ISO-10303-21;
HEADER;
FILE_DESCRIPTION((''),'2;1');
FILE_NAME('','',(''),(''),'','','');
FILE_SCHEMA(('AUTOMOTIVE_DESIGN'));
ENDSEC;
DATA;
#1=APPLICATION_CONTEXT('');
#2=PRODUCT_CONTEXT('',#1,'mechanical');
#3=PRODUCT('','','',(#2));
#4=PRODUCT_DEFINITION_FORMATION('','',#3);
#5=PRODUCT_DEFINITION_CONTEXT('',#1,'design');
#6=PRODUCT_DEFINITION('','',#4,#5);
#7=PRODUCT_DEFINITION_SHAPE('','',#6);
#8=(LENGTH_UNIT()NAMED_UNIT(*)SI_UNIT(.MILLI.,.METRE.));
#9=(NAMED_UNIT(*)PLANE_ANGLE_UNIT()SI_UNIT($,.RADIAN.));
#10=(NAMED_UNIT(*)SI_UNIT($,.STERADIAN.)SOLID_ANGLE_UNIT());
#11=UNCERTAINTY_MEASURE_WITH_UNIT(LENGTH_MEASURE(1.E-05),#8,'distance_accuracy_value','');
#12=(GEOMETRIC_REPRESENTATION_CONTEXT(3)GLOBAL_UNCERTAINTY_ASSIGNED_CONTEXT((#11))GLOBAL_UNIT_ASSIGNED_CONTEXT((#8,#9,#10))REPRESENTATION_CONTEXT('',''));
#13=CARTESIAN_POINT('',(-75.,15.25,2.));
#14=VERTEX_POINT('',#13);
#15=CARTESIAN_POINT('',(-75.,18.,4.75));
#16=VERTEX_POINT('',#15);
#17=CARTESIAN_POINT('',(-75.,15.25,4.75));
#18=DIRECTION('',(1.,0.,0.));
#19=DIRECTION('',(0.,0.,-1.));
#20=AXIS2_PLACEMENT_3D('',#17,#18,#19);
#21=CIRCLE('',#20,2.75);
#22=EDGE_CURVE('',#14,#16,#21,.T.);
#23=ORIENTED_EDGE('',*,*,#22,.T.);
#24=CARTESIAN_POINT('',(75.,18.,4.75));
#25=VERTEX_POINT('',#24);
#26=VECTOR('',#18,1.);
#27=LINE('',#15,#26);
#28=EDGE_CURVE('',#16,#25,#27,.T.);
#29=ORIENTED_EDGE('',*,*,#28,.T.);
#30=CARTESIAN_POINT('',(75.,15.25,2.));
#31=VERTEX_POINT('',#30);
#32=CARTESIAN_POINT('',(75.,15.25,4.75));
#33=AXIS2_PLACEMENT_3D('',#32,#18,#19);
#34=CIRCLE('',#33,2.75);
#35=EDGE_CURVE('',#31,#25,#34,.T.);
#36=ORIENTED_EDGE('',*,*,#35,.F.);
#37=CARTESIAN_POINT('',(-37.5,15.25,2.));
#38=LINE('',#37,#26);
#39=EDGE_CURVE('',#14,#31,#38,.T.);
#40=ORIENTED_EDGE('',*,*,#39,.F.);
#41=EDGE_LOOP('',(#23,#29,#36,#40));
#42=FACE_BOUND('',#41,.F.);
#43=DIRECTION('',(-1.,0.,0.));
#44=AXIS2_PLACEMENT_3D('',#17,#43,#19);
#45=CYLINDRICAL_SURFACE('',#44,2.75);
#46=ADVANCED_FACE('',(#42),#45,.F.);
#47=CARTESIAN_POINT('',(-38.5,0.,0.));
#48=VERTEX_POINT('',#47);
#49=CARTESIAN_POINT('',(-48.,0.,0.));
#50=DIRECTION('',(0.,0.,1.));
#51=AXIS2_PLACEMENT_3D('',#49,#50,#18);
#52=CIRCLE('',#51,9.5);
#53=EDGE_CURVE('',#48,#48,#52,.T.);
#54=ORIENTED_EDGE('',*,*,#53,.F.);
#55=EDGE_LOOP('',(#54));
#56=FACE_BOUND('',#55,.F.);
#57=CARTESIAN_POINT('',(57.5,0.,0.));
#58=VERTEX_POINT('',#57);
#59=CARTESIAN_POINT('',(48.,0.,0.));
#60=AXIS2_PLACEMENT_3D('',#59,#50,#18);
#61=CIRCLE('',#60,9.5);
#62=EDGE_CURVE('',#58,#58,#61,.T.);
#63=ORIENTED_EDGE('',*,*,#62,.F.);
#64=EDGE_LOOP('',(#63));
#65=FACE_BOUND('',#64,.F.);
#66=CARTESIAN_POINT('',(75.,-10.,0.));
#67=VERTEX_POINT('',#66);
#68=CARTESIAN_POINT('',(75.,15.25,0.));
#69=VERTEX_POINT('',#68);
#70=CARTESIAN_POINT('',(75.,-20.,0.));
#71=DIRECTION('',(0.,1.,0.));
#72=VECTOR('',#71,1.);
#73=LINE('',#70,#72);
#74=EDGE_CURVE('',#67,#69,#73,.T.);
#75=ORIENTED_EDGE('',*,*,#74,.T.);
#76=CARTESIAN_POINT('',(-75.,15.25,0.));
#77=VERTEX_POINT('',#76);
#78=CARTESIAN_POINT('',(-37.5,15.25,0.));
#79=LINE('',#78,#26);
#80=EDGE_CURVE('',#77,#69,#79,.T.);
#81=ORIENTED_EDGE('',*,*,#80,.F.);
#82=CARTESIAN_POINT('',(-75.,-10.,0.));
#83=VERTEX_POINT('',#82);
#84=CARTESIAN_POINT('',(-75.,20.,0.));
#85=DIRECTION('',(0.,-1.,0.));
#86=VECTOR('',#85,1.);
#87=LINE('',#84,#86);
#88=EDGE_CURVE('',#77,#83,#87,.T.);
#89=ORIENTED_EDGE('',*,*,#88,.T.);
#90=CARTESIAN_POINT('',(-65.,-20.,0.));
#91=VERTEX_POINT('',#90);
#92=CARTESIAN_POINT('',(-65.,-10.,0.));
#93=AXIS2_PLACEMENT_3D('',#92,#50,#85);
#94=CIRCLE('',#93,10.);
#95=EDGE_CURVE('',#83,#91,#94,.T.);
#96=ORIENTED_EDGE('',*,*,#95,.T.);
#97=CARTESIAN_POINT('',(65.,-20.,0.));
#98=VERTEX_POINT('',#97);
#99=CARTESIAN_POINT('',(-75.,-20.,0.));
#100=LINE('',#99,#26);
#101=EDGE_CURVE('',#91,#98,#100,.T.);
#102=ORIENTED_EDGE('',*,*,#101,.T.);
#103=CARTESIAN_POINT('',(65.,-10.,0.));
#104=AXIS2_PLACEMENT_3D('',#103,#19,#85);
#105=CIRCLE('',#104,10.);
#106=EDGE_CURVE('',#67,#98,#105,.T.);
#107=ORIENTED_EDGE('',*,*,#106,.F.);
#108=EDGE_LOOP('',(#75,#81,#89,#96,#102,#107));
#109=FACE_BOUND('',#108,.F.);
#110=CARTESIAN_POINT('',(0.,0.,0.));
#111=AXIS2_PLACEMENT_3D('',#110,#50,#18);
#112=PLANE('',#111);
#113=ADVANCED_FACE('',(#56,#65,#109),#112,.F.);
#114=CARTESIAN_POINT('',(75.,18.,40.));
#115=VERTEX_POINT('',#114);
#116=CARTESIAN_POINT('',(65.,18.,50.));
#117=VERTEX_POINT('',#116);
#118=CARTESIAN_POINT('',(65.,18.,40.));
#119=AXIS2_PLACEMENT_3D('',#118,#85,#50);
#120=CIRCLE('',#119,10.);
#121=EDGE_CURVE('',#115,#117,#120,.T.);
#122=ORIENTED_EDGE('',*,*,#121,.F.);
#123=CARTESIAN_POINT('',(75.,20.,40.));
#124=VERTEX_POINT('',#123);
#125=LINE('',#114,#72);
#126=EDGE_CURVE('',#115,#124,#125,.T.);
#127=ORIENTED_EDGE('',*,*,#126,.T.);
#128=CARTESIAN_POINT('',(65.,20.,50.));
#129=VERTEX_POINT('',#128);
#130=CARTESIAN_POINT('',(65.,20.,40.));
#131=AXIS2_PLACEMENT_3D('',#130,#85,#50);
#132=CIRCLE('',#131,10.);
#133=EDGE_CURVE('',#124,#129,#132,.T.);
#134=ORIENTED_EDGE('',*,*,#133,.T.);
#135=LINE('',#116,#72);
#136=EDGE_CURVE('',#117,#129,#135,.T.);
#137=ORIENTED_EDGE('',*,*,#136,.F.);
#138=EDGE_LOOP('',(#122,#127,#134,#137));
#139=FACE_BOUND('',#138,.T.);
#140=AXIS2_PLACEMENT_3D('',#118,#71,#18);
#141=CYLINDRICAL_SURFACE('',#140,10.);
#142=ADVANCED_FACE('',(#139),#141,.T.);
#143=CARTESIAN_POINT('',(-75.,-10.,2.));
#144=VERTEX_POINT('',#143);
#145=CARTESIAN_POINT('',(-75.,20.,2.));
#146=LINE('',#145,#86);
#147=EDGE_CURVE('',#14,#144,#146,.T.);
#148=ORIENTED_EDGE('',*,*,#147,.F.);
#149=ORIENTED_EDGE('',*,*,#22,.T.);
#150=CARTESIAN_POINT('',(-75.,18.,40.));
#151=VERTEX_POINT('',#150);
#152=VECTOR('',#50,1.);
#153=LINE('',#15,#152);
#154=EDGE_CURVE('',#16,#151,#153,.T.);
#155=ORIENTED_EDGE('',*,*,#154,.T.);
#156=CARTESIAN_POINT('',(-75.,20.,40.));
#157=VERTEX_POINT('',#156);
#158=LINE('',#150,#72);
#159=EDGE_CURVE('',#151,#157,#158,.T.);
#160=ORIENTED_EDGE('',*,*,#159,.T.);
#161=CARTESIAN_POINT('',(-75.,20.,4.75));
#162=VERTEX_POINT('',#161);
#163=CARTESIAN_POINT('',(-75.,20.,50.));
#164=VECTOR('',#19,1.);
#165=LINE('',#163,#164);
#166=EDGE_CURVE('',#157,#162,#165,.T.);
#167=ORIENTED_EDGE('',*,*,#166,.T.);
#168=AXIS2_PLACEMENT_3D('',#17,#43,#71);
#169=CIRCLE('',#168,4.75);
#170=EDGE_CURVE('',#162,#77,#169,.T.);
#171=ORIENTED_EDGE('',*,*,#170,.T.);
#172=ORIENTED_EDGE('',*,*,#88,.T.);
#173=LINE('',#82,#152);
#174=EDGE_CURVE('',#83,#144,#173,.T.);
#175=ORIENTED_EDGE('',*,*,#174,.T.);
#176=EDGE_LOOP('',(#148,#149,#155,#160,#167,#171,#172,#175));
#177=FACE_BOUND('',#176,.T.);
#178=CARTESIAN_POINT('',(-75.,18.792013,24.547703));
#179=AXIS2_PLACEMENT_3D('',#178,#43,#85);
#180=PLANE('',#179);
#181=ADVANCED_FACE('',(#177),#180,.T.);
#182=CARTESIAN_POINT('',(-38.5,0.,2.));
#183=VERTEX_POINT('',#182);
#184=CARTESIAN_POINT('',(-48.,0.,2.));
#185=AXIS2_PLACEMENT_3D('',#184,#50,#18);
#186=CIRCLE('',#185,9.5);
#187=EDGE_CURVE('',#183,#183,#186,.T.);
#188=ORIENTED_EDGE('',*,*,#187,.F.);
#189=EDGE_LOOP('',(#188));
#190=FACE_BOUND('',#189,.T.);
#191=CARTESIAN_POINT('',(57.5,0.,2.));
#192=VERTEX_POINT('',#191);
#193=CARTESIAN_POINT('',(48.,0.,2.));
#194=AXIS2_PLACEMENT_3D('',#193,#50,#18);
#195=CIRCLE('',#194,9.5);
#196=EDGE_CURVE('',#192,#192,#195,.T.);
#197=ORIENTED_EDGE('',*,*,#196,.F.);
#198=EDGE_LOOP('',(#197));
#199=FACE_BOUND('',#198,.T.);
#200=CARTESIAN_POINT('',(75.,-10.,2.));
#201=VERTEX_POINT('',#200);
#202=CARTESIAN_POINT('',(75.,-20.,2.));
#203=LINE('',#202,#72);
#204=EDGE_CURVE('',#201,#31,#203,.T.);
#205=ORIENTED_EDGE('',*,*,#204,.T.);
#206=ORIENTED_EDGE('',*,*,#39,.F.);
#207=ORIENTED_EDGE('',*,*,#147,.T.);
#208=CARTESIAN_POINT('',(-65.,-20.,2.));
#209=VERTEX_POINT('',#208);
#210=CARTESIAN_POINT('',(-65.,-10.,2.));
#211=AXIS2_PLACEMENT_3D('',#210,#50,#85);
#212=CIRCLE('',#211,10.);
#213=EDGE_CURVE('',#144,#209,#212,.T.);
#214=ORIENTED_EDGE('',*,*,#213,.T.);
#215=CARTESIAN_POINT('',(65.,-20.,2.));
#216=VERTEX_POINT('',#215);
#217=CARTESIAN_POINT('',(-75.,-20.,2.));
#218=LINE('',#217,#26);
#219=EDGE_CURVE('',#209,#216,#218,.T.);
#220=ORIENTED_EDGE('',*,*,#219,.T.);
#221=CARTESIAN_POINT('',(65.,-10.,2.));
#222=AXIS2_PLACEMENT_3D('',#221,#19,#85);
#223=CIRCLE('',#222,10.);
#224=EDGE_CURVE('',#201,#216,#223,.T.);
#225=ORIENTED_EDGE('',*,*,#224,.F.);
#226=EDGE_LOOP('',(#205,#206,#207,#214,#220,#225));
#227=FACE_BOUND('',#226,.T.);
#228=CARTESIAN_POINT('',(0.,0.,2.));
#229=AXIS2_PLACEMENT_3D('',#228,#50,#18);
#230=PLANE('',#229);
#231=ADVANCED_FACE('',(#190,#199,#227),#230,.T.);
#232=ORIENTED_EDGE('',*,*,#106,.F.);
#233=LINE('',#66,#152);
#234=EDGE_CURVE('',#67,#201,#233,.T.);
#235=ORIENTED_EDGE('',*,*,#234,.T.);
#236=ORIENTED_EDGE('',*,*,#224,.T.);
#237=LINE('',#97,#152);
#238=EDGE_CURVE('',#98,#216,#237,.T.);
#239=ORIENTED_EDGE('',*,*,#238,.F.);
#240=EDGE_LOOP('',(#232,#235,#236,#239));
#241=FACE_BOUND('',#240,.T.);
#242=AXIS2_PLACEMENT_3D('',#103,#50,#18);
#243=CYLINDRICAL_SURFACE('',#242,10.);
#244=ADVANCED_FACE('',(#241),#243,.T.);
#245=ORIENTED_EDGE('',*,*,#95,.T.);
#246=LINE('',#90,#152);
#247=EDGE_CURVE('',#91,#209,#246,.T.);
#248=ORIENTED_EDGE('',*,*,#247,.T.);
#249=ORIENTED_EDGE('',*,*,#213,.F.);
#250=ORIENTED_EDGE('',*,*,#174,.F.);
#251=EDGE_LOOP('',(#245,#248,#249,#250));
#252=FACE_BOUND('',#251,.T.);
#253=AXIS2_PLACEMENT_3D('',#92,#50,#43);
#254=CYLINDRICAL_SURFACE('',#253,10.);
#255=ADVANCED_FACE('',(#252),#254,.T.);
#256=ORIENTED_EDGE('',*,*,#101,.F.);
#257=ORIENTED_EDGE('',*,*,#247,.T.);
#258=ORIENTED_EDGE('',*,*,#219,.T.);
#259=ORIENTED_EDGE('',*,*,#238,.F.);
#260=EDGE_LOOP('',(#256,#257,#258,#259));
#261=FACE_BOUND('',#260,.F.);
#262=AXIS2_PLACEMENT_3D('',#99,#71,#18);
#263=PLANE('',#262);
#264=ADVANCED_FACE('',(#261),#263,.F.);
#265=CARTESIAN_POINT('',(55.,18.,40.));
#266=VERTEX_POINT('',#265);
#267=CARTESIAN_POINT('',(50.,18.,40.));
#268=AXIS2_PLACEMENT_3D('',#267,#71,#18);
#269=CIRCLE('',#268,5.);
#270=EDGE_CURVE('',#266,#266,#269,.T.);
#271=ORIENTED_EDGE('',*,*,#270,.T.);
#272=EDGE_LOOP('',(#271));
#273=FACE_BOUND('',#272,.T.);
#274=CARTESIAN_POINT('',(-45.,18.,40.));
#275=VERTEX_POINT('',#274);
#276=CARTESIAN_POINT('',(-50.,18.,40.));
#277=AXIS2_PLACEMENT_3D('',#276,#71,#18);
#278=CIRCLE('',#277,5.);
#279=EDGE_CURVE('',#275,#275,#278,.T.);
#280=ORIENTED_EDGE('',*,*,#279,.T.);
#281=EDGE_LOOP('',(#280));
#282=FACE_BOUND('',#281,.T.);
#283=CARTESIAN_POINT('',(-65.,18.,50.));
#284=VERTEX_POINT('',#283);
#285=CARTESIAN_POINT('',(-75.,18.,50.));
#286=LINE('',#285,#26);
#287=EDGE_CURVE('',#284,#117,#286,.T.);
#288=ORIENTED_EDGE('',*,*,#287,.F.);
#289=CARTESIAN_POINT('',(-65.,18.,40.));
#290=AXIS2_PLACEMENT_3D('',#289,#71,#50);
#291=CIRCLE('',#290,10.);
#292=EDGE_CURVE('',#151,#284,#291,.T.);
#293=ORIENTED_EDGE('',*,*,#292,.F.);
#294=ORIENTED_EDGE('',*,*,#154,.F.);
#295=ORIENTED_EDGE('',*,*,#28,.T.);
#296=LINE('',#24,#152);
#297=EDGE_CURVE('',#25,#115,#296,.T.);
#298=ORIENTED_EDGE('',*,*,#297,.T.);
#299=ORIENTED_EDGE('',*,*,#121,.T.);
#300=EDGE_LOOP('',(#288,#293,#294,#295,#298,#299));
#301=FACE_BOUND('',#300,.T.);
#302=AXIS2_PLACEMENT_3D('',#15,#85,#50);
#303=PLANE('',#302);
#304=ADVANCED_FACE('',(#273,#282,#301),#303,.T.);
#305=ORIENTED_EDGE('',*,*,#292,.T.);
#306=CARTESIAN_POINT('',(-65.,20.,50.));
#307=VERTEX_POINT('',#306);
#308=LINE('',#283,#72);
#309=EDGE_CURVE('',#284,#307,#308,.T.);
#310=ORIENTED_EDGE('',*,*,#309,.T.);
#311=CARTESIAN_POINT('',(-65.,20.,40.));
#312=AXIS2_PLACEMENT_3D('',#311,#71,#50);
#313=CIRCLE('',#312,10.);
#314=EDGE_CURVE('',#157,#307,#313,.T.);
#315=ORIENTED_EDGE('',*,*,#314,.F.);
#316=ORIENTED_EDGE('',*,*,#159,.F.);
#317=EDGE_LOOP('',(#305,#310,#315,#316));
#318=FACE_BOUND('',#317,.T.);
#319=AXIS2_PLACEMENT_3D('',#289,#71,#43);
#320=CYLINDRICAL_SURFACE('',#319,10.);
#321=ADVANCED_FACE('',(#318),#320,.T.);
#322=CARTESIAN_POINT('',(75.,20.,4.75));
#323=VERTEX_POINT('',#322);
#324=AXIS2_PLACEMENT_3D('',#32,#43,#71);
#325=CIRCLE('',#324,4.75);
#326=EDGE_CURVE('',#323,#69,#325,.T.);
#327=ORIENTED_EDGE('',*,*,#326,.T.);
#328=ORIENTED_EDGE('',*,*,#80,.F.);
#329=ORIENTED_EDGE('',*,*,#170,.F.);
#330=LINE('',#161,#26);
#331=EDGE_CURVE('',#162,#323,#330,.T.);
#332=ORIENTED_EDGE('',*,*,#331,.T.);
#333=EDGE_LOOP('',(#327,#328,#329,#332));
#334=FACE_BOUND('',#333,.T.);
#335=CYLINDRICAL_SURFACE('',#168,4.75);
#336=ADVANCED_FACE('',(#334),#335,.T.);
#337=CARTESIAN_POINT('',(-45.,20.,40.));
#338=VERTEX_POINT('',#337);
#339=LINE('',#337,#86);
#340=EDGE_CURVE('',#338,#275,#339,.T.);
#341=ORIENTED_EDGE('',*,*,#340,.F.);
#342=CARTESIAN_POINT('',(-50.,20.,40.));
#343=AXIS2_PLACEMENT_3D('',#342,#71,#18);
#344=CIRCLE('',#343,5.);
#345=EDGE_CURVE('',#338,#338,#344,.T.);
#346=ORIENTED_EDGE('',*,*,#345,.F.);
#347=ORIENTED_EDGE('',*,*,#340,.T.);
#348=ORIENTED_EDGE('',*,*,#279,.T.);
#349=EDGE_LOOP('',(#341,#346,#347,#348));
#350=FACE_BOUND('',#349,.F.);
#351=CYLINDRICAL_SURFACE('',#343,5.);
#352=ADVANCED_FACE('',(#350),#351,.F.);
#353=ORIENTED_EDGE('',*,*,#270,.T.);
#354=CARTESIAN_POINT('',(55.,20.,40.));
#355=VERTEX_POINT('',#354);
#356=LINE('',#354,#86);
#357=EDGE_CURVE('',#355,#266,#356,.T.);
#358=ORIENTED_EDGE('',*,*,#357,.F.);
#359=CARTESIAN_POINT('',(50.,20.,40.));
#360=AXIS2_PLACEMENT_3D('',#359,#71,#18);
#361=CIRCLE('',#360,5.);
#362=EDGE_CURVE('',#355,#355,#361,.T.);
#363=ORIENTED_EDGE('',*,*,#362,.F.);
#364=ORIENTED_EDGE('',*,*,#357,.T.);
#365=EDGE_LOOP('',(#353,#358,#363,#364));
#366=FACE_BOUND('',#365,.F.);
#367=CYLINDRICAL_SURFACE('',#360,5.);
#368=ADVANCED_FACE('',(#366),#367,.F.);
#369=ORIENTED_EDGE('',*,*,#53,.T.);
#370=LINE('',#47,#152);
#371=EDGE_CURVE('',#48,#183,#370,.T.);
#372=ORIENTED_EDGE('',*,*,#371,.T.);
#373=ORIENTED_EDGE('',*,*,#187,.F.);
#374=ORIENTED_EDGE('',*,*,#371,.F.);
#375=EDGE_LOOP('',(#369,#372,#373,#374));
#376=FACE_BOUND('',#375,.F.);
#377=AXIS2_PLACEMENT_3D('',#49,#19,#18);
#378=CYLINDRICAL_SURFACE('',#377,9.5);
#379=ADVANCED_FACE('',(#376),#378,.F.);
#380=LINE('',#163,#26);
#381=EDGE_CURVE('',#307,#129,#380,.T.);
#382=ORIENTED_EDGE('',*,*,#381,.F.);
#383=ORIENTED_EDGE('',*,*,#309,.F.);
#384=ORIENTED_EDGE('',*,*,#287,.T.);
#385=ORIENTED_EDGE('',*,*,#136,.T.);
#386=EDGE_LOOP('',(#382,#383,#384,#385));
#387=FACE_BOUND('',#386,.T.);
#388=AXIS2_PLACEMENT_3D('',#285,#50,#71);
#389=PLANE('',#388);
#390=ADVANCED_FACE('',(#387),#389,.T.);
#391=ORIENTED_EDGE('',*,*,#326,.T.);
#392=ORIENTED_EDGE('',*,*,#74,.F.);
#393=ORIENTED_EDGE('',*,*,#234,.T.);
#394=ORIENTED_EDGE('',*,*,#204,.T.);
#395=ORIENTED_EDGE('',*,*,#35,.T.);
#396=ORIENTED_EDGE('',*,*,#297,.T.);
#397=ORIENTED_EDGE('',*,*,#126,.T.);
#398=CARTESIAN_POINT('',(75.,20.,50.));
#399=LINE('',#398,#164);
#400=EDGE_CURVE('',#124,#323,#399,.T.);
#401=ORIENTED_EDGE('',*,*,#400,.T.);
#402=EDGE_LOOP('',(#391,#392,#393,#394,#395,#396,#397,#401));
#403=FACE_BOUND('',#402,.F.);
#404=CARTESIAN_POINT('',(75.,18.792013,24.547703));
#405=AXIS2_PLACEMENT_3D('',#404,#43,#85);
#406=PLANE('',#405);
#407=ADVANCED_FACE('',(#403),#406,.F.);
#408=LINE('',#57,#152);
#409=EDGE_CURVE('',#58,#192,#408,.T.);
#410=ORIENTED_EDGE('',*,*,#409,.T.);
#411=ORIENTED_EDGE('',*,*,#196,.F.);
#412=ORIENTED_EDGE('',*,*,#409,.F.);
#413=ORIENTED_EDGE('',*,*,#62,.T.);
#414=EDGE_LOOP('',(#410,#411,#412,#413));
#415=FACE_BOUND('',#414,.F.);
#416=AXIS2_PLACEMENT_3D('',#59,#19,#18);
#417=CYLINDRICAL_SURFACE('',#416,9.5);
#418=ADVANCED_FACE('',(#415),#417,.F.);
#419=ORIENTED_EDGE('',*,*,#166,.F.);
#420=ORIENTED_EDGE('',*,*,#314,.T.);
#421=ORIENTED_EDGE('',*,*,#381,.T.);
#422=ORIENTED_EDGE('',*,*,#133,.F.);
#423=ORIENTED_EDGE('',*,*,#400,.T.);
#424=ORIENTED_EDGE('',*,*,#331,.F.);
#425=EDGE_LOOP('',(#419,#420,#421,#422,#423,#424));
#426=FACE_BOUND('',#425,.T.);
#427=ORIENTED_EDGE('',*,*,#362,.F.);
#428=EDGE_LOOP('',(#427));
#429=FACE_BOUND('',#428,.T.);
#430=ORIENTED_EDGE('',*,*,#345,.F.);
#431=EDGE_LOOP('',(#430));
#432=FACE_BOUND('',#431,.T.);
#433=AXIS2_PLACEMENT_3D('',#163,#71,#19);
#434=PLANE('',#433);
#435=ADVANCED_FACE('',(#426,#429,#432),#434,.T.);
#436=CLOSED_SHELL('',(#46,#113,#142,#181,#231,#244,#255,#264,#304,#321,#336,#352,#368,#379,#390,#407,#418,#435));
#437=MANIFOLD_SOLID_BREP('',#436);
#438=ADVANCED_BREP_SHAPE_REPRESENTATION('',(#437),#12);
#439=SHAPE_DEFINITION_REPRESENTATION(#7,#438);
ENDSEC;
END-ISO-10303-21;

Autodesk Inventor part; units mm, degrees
ref_plane "YZ Plane" through (0, 0, 0) normal (1, 0, 0) x (0, 1, 0)
ref_plane "XZ Plane" through (0, 0, 0) normal (0, 1, 0) x (-1, 0, 0)
ref_plane "XY Plane" through (0, 0, 0) normal (0, 0, 1) x (1, 0, 0)
sketch "Sketch1" plane through (0, 0, 0) normal (0, 0, 1) x (1, 0, 0)
  line L0 (-75, -20) -> (75, -20)
  line L1 (75, -20) -> (75, 20)
  line L2 (75, 20) -> (-75, 20)
  line L3 (-75, 20) -> (-75, -20)
  line L4 (-75, -20) -> (75, 20) construction
  line L5 (75, -20) -> (-75, 20) construction
  circle A0 centre (-48, 0) radius 9.5
  circle A1 centre (48, 0) radius 9.5
  line L6 (0, 20) -> (0, -20) construction
  point P0 (0, 0)
  point P1 (0, 0)
  dimension "d0" = 150
  dimension "d1" = 40
  dimension "d6" = 19
  dimension "d7" = 96
extrude "Plate1" add sketch "Sketch1" along normal blind 2
sketch "Sketch3" plane through (-75, 18, 0) normal (0, 1, 0) x (-1, 0, 0)
  line L0 (-150, 0) -> (0, 0)
  line L1 (0, 0) -> (0, 50)
  line L2 (0, 50) -> (-150, 50)
  line L3 (-150, 50) -> (-150, 0)
edge flange "Flange1" height 50 angle 90 thickness 2 bend radius 2.75 thickness toward (0, 1, 0) relief round relief width 2 relief depth 1 edges at (0, 20, 2) wall of the first edge with corners at (75, 18, 0) (-75, 18, 0) (-75, 18, 50) (75, 18, 50)
bend "Bend1"
corner "Corner1"
sketch "Sketch4" plane through (-75, 20, 50) normal (0, 1, 0) x (1, 0, 0)
  circle A0 centre (25, 10) radius 5
  circle A1 centre (125, 10) radius 5
  line L0 (150, 0) -> (0, 0) construction
  line L1 (75, 0) -> (75, 50) construction
  line L2 (150, 48) -> (0, 48) construction
  dimension "d18" = 10
  dimension "d19" = 10
  dimension "d20" = 100
extrude "Cut1" cut sketch "Sketch4" against normal blind 2
fillet "Corner Round1" radius 10 4 edges at (75, 19, 50) (-75, -20, 1) (-75, 19, 50) (75, -20, 1)
equation "\"d21\" = Thickness"
equation "\"d2\" = Thickness"
equation "\"d8\" = BendReliefWidth"
equation "\"d9\" = BendReliefDepth"
equation "\"d10\" = MinimumRemnant"
equation "\"d11\" = TransitionRadius"
equation "\"d14\" = BendRadius"
equation "\"d15\" = CornerReliefSize"
equation "\"d16\" = GapSize"
equation "\"d17\" = JacobiRadiusSize"
equation "\"BendReliefWidth\" = Thickness"
equation "\"BendReliefDepth\" = 0.5 * Thickness"
equation "\"CornerReliefSize\" = 4 * Thickness"
equation "\"MinimumRemnant\" = 2 * Thickness"
equation "\"TransitionRadius\" = BendRadius"
equation "\"JacobiRadiusSize\" = BendRadius"
equation "\"GapSize\" = Thickness"
equation "\"Thickness\" = 2"
equation "\"BendRadius\" = 2.75"
properties part number "Goat_roller_supp" material "Stainless Steel"
